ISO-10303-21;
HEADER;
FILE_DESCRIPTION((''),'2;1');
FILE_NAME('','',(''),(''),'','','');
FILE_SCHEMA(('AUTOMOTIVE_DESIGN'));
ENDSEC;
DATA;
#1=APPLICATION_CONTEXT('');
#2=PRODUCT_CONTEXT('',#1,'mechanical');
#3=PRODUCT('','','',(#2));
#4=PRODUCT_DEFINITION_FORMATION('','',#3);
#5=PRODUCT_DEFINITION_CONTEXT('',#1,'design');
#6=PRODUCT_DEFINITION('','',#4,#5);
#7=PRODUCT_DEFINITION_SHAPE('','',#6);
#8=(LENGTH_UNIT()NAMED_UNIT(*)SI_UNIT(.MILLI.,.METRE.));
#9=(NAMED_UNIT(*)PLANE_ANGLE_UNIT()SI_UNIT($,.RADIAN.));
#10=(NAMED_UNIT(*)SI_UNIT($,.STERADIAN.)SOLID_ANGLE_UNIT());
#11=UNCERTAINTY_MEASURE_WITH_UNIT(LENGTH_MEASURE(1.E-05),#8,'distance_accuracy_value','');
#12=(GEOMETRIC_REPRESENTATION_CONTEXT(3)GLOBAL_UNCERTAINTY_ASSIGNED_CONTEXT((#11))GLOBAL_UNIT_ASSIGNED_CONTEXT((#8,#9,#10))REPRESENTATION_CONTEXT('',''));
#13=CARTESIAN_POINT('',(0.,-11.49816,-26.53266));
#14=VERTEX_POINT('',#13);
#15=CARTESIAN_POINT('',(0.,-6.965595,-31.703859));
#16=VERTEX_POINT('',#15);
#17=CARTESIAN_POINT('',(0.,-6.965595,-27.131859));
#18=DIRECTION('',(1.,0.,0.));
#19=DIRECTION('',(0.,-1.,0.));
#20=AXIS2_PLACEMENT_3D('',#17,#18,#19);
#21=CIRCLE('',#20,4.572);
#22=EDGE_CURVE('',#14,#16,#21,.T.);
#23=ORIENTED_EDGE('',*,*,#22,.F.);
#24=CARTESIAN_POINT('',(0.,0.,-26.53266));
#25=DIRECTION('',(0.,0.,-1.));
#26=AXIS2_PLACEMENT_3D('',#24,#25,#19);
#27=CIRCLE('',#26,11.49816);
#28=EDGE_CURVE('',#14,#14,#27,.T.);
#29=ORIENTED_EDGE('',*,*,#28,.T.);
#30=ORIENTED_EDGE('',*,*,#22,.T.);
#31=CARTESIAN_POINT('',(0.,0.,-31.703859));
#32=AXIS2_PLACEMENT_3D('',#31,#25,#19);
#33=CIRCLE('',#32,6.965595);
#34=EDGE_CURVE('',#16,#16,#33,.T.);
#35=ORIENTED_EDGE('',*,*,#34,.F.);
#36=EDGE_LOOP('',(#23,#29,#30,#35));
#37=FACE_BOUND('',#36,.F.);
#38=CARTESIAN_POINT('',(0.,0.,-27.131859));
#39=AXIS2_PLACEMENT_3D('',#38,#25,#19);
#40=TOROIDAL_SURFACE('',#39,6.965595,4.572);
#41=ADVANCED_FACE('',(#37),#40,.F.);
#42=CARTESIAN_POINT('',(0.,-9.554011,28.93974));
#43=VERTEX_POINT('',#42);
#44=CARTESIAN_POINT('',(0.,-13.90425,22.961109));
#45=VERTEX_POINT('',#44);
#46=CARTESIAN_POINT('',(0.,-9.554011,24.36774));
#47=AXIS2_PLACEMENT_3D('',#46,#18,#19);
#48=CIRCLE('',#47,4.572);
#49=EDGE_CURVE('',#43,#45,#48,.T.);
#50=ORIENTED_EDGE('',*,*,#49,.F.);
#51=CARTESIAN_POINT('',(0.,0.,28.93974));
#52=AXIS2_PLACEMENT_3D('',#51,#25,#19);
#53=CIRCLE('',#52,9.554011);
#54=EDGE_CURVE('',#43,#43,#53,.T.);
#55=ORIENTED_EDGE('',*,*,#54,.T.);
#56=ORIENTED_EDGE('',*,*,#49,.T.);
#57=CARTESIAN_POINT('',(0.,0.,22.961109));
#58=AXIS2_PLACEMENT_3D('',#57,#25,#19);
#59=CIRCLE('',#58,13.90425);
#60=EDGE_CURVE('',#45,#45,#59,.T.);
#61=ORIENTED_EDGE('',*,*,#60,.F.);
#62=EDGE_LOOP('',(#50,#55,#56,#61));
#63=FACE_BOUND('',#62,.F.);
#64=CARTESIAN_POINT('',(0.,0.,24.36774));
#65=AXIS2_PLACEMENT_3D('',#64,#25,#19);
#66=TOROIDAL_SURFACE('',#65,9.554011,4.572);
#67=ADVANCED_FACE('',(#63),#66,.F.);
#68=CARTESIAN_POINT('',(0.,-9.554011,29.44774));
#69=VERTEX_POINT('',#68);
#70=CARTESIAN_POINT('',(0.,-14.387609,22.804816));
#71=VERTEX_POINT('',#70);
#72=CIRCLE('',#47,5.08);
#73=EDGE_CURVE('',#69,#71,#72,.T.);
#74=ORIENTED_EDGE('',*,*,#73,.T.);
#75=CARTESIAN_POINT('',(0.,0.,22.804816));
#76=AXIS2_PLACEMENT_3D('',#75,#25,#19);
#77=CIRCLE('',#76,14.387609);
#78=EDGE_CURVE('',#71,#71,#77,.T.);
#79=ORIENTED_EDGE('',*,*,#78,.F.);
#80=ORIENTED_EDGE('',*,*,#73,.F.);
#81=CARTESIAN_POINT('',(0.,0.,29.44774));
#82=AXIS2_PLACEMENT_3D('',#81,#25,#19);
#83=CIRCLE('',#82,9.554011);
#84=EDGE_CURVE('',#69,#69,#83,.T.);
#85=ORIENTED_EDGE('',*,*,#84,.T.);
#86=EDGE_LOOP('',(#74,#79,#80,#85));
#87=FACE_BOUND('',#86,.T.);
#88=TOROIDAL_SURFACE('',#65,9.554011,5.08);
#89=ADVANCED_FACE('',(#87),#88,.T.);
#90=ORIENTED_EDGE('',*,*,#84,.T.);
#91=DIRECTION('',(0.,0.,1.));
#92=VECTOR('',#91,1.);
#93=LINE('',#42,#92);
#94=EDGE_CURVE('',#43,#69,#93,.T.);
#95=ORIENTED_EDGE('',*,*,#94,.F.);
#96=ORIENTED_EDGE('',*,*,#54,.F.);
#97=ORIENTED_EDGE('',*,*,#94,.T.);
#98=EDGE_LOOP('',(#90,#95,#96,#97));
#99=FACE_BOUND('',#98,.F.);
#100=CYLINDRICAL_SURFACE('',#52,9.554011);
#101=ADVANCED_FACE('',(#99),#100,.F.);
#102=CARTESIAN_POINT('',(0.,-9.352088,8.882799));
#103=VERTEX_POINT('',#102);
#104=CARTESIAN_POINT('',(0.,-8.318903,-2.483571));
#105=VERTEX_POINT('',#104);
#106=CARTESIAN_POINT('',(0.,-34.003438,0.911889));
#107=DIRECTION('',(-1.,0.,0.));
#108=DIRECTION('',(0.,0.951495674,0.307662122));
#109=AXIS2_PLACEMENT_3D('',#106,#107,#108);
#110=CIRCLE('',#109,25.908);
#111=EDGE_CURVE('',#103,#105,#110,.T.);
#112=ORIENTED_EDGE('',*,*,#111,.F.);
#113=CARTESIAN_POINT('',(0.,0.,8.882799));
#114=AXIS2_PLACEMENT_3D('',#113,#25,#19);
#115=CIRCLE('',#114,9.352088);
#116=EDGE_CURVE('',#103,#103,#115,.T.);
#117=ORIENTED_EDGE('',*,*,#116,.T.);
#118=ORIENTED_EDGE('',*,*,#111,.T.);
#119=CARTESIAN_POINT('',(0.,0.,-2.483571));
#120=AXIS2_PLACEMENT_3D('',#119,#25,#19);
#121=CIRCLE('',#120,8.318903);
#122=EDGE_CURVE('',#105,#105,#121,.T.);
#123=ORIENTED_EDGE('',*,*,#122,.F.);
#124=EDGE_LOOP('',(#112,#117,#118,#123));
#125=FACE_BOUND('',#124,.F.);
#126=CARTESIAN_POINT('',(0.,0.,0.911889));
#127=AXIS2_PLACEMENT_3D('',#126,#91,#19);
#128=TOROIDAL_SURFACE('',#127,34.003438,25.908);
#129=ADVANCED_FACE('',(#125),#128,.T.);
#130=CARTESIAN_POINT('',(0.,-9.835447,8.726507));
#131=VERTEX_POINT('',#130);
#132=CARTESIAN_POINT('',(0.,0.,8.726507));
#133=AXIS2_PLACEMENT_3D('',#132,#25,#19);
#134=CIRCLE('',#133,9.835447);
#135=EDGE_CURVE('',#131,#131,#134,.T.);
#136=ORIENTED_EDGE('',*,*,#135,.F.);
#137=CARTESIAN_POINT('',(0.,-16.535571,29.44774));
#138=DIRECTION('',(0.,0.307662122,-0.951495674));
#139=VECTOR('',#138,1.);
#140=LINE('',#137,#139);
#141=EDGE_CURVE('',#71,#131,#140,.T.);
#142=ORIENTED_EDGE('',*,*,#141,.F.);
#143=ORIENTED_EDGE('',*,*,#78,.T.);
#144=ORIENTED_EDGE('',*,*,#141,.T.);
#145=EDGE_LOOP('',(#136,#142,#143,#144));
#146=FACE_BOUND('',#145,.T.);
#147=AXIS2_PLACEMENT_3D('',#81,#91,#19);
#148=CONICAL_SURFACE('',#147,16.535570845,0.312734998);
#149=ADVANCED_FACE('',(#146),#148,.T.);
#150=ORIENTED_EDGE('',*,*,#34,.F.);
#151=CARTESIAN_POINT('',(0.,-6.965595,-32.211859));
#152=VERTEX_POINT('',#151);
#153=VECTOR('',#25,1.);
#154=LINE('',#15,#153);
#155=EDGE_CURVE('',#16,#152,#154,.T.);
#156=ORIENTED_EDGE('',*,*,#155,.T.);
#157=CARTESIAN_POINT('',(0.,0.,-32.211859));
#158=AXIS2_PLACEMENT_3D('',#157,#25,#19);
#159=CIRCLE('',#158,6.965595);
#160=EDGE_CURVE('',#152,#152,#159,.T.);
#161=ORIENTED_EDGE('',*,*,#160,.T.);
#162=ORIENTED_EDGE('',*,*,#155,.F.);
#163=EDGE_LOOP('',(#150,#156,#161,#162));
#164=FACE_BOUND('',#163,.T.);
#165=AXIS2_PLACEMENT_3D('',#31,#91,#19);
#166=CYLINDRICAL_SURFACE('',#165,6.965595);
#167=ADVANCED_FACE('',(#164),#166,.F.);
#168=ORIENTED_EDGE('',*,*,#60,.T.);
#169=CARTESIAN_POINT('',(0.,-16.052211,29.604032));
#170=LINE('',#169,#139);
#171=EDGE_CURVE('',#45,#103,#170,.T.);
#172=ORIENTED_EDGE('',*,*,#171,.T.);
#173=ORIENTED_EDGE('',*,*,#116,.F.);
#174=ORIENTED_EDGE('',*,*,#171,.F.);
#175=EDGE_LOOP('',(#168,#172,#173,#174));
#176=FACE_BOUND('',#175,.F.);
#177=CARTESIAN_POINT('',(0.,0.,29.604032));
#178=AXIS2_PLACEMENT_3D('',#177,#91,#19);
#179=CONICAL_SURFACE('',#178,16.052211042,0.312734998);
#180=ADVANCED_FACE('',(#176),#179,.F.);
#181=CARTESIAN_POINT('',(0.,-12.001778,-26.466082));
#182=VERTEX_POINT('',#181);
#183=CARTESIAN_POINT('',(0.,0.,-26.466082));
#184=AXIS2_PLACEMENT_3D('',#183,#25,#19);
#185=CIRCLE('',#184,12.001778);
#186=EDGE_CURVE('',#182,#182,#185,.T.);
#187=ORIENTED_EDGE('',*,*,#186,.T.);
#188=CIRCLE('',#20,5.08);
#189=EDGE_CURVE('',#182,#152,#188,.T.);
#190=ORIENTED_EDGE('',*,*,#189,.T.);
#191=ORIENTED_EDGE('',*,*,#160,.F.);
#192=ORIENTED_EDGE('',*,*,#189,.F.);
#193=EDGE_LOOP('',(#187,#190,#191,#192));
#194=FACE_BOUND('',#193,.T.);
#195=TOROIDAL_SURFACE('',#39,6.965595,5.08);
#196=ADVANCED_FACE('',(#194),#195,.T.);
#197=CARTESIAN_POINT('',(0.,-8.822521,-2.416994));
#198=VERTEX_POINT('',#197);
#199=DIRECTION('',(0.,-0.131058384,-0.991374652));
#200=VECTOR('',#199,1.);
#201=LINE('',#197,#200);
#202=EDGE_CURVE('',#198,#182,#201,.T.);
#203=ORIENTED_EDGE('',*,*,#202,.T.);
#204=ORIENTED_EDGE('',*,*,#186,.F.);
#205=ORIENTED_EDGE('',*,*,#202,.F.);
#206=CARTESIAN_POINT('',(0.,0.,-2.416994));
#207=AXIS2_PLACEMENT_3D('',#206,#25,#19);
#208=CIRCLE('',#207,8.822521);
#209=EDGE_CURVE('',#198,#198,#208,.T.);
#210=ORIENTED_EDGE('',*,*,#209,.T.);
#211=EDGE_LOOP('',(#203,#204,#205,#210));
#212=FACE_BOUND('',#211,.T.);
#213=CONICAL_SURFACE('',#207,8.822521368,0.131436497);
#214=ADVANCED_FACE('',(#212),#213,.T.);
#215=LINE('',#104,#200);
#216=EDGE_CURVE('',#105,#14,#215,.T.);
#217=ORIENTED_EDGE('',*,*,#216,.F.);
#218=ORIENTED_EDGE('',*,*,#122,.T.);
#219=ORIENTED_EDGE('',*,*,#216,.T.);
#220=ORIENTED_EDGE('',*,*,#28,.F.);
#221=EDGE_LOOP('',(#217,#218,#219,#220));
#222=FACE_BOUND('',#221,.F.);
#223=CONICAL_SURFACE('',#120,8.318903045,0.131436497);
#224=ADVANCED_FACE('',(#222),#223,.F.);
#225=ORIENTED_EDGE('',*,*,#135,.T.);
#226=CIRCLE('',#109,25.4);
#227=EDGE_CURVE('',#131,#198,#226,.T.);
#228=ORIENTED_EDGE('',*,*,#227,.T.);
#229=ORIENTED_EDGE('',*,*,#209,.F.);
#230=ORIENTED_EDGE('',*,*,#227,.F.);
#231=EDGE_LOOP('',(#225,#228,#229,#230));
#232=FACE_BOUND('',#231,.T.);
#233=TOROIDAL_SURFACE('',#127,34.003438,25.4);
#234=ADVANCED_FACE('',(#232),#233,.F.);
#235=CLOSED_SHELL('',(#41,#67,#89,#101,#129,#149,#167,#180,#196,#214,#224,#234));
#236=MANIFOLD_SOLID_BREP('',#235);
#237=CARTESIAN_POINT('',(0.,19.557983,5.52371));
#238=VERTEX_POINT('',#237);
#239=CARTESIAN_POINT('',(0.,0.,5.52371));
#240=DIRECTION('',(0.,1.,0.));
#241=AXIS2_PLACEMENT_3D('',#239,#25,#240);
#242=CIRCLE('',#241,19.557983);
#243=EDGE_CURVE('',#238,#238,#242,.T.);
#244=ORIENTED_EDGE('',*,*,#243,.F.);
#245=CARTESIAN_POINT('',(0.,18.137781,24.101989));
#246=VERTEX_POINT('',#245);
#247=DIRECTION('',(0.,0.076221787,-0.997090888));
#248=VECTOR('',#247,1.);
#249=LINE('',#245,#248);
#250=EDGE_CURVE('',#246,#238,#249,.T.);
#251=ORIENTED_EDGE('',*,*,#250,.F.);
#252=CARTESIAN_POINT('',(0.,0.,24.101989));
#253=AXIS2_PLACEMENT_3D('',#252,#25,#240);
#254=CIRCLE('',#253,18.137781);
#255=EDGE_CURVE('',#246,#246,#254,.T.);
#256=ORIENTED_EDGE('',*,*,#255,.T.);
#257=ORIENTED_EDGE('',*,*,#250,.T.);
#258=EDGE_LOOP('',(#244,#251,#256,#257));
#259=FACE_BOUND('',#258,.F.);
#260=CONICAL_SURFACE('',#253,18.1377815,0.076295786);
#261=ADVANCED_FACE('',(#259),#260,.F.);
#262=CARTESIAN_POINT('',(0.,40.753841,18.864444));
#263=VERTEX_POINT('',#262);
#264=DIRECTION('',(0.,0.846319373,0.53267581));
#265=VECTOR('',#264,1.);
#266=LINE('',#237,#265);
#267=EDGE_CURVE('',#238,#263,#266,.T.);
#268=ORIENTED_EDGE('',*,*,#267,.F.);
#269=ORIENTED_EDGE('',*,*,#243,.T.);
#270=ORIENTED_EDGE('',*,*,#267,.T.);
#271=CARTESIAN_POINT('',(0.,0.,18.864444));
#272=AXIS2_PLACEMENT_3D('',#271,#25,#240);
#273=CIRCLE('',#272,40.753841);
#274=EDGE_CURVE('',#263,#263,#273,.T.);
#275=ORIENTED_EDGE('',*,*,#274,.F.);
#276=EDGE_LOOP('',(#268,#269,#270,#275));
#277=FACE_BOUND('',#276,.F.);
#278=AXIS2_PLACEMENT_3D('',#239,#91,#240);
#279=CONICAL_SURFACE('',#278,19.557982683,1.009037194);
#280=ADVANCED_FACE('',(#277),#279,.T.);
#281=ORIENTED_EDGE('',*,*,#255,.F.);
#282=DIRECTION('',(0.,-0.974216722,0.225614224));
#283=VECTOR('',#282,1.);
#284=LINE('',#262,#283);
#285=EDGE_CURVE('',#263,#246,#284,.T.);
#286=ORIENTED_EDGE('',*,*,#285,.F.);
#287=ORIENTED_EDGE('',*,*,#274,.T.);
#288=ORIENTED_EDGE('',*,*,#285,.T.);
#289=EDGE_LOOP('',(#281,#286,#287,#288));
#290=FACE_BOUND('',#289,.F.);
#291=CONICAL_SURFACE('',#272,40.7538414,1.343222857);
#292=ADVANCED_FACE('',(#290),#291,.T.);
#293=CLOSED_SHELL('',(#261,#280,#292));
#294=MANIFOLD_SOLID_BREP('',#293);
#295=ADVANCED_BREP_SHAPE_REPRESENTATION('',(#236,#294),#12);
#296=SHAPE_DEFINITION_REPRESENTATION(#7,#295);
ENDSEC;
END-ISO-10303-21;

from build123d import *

# Parameters (mm, degrees)
F2_R = 5.08
F3_R = 5.08
F4_T = -0.508


# Not quite as in the source:
# - a shell that OpenCascade refuses in one call is made with other operations: the cavity is built on its own and cut out


with BuildPart() as f1:
    # F0 (on Right) → F1 (revolve)
    with BuildSketch(Plane.YZ):
        with BuildLine():
            Line((0, -32.2118587792), (0, 29.4477399439))
            Line((0, 29.4477399439), (-2.8095957153, 29.4477399439))
            Line((-2.8095957153, 29.4477399439), (-16.535570845, 29.4477399439))
            Line((-16.535570845, 29.4477399439), (-9.8354473889, 8.7265070489))
            ThreePointArc((-9.8354473889, 8.7265070489), (-8.7077256174, 3.2112280279), (-8.8225213679, -2.4169938057))
            Line((-8.8225213679, -2.4169938057), (-12.7613620927, -32.2118587792))
            Line((-12.7613620927, -32.2118587792), (0, -32.2118587792))
        make_face()
    revolve(axis=Axis((0, 0, -1.3820594177), (0, 0, -1)))

    # F2
    f2_edges = [f1.edges().sort_by_distance(p)[0] for p in [
        (0, 16.535571, 29.44774),
    ]]
    fillet(f2_edges, radius=F2_R)

    # F3
    f3_edges = [f1.edges().sort_by_distance(p)[0] for p in [
        (0, 12.761362, -32.211859),
    ]]
    fillet(f3_edges, radius=F3_R)

    # F4: a shell. OpenCascade refuses it in one call, so the cavity is built on its own and cut out:
    # the body offset inwards by the wall thickness, plus a prism from it out through each open face.
    f4_core = offset(f1.part, amount=F4_T, mode=Mode.PRIVATE)
    f4_exits = [f4_core.faces().sort_by_distance(p)[0] for p in [
        (0, 0, 28.93974),
        (0, 0, -31.703859),
    ]]
    add(f4_core, mode=Mode.SUBTRACT)
    extrude(f4_exits, amount=-F4_T, mode=Mode.SUBTRACT)


with BuildPart() as f1b:
    # F0 (on Right) → F1, piece 2 (revolve)
    with BuildSketch(Plane.YZ):
        Polygon((40.7538414001, 18.8644435257), (18.1377814998, 24.1019894291), (19.5579826832, 5.523710046), align=None)
    revolve(axis=Axis((0, 0, -1.3820594177), (0, 0, -1)))


solid = Compound([f1.part, f1b.part])
